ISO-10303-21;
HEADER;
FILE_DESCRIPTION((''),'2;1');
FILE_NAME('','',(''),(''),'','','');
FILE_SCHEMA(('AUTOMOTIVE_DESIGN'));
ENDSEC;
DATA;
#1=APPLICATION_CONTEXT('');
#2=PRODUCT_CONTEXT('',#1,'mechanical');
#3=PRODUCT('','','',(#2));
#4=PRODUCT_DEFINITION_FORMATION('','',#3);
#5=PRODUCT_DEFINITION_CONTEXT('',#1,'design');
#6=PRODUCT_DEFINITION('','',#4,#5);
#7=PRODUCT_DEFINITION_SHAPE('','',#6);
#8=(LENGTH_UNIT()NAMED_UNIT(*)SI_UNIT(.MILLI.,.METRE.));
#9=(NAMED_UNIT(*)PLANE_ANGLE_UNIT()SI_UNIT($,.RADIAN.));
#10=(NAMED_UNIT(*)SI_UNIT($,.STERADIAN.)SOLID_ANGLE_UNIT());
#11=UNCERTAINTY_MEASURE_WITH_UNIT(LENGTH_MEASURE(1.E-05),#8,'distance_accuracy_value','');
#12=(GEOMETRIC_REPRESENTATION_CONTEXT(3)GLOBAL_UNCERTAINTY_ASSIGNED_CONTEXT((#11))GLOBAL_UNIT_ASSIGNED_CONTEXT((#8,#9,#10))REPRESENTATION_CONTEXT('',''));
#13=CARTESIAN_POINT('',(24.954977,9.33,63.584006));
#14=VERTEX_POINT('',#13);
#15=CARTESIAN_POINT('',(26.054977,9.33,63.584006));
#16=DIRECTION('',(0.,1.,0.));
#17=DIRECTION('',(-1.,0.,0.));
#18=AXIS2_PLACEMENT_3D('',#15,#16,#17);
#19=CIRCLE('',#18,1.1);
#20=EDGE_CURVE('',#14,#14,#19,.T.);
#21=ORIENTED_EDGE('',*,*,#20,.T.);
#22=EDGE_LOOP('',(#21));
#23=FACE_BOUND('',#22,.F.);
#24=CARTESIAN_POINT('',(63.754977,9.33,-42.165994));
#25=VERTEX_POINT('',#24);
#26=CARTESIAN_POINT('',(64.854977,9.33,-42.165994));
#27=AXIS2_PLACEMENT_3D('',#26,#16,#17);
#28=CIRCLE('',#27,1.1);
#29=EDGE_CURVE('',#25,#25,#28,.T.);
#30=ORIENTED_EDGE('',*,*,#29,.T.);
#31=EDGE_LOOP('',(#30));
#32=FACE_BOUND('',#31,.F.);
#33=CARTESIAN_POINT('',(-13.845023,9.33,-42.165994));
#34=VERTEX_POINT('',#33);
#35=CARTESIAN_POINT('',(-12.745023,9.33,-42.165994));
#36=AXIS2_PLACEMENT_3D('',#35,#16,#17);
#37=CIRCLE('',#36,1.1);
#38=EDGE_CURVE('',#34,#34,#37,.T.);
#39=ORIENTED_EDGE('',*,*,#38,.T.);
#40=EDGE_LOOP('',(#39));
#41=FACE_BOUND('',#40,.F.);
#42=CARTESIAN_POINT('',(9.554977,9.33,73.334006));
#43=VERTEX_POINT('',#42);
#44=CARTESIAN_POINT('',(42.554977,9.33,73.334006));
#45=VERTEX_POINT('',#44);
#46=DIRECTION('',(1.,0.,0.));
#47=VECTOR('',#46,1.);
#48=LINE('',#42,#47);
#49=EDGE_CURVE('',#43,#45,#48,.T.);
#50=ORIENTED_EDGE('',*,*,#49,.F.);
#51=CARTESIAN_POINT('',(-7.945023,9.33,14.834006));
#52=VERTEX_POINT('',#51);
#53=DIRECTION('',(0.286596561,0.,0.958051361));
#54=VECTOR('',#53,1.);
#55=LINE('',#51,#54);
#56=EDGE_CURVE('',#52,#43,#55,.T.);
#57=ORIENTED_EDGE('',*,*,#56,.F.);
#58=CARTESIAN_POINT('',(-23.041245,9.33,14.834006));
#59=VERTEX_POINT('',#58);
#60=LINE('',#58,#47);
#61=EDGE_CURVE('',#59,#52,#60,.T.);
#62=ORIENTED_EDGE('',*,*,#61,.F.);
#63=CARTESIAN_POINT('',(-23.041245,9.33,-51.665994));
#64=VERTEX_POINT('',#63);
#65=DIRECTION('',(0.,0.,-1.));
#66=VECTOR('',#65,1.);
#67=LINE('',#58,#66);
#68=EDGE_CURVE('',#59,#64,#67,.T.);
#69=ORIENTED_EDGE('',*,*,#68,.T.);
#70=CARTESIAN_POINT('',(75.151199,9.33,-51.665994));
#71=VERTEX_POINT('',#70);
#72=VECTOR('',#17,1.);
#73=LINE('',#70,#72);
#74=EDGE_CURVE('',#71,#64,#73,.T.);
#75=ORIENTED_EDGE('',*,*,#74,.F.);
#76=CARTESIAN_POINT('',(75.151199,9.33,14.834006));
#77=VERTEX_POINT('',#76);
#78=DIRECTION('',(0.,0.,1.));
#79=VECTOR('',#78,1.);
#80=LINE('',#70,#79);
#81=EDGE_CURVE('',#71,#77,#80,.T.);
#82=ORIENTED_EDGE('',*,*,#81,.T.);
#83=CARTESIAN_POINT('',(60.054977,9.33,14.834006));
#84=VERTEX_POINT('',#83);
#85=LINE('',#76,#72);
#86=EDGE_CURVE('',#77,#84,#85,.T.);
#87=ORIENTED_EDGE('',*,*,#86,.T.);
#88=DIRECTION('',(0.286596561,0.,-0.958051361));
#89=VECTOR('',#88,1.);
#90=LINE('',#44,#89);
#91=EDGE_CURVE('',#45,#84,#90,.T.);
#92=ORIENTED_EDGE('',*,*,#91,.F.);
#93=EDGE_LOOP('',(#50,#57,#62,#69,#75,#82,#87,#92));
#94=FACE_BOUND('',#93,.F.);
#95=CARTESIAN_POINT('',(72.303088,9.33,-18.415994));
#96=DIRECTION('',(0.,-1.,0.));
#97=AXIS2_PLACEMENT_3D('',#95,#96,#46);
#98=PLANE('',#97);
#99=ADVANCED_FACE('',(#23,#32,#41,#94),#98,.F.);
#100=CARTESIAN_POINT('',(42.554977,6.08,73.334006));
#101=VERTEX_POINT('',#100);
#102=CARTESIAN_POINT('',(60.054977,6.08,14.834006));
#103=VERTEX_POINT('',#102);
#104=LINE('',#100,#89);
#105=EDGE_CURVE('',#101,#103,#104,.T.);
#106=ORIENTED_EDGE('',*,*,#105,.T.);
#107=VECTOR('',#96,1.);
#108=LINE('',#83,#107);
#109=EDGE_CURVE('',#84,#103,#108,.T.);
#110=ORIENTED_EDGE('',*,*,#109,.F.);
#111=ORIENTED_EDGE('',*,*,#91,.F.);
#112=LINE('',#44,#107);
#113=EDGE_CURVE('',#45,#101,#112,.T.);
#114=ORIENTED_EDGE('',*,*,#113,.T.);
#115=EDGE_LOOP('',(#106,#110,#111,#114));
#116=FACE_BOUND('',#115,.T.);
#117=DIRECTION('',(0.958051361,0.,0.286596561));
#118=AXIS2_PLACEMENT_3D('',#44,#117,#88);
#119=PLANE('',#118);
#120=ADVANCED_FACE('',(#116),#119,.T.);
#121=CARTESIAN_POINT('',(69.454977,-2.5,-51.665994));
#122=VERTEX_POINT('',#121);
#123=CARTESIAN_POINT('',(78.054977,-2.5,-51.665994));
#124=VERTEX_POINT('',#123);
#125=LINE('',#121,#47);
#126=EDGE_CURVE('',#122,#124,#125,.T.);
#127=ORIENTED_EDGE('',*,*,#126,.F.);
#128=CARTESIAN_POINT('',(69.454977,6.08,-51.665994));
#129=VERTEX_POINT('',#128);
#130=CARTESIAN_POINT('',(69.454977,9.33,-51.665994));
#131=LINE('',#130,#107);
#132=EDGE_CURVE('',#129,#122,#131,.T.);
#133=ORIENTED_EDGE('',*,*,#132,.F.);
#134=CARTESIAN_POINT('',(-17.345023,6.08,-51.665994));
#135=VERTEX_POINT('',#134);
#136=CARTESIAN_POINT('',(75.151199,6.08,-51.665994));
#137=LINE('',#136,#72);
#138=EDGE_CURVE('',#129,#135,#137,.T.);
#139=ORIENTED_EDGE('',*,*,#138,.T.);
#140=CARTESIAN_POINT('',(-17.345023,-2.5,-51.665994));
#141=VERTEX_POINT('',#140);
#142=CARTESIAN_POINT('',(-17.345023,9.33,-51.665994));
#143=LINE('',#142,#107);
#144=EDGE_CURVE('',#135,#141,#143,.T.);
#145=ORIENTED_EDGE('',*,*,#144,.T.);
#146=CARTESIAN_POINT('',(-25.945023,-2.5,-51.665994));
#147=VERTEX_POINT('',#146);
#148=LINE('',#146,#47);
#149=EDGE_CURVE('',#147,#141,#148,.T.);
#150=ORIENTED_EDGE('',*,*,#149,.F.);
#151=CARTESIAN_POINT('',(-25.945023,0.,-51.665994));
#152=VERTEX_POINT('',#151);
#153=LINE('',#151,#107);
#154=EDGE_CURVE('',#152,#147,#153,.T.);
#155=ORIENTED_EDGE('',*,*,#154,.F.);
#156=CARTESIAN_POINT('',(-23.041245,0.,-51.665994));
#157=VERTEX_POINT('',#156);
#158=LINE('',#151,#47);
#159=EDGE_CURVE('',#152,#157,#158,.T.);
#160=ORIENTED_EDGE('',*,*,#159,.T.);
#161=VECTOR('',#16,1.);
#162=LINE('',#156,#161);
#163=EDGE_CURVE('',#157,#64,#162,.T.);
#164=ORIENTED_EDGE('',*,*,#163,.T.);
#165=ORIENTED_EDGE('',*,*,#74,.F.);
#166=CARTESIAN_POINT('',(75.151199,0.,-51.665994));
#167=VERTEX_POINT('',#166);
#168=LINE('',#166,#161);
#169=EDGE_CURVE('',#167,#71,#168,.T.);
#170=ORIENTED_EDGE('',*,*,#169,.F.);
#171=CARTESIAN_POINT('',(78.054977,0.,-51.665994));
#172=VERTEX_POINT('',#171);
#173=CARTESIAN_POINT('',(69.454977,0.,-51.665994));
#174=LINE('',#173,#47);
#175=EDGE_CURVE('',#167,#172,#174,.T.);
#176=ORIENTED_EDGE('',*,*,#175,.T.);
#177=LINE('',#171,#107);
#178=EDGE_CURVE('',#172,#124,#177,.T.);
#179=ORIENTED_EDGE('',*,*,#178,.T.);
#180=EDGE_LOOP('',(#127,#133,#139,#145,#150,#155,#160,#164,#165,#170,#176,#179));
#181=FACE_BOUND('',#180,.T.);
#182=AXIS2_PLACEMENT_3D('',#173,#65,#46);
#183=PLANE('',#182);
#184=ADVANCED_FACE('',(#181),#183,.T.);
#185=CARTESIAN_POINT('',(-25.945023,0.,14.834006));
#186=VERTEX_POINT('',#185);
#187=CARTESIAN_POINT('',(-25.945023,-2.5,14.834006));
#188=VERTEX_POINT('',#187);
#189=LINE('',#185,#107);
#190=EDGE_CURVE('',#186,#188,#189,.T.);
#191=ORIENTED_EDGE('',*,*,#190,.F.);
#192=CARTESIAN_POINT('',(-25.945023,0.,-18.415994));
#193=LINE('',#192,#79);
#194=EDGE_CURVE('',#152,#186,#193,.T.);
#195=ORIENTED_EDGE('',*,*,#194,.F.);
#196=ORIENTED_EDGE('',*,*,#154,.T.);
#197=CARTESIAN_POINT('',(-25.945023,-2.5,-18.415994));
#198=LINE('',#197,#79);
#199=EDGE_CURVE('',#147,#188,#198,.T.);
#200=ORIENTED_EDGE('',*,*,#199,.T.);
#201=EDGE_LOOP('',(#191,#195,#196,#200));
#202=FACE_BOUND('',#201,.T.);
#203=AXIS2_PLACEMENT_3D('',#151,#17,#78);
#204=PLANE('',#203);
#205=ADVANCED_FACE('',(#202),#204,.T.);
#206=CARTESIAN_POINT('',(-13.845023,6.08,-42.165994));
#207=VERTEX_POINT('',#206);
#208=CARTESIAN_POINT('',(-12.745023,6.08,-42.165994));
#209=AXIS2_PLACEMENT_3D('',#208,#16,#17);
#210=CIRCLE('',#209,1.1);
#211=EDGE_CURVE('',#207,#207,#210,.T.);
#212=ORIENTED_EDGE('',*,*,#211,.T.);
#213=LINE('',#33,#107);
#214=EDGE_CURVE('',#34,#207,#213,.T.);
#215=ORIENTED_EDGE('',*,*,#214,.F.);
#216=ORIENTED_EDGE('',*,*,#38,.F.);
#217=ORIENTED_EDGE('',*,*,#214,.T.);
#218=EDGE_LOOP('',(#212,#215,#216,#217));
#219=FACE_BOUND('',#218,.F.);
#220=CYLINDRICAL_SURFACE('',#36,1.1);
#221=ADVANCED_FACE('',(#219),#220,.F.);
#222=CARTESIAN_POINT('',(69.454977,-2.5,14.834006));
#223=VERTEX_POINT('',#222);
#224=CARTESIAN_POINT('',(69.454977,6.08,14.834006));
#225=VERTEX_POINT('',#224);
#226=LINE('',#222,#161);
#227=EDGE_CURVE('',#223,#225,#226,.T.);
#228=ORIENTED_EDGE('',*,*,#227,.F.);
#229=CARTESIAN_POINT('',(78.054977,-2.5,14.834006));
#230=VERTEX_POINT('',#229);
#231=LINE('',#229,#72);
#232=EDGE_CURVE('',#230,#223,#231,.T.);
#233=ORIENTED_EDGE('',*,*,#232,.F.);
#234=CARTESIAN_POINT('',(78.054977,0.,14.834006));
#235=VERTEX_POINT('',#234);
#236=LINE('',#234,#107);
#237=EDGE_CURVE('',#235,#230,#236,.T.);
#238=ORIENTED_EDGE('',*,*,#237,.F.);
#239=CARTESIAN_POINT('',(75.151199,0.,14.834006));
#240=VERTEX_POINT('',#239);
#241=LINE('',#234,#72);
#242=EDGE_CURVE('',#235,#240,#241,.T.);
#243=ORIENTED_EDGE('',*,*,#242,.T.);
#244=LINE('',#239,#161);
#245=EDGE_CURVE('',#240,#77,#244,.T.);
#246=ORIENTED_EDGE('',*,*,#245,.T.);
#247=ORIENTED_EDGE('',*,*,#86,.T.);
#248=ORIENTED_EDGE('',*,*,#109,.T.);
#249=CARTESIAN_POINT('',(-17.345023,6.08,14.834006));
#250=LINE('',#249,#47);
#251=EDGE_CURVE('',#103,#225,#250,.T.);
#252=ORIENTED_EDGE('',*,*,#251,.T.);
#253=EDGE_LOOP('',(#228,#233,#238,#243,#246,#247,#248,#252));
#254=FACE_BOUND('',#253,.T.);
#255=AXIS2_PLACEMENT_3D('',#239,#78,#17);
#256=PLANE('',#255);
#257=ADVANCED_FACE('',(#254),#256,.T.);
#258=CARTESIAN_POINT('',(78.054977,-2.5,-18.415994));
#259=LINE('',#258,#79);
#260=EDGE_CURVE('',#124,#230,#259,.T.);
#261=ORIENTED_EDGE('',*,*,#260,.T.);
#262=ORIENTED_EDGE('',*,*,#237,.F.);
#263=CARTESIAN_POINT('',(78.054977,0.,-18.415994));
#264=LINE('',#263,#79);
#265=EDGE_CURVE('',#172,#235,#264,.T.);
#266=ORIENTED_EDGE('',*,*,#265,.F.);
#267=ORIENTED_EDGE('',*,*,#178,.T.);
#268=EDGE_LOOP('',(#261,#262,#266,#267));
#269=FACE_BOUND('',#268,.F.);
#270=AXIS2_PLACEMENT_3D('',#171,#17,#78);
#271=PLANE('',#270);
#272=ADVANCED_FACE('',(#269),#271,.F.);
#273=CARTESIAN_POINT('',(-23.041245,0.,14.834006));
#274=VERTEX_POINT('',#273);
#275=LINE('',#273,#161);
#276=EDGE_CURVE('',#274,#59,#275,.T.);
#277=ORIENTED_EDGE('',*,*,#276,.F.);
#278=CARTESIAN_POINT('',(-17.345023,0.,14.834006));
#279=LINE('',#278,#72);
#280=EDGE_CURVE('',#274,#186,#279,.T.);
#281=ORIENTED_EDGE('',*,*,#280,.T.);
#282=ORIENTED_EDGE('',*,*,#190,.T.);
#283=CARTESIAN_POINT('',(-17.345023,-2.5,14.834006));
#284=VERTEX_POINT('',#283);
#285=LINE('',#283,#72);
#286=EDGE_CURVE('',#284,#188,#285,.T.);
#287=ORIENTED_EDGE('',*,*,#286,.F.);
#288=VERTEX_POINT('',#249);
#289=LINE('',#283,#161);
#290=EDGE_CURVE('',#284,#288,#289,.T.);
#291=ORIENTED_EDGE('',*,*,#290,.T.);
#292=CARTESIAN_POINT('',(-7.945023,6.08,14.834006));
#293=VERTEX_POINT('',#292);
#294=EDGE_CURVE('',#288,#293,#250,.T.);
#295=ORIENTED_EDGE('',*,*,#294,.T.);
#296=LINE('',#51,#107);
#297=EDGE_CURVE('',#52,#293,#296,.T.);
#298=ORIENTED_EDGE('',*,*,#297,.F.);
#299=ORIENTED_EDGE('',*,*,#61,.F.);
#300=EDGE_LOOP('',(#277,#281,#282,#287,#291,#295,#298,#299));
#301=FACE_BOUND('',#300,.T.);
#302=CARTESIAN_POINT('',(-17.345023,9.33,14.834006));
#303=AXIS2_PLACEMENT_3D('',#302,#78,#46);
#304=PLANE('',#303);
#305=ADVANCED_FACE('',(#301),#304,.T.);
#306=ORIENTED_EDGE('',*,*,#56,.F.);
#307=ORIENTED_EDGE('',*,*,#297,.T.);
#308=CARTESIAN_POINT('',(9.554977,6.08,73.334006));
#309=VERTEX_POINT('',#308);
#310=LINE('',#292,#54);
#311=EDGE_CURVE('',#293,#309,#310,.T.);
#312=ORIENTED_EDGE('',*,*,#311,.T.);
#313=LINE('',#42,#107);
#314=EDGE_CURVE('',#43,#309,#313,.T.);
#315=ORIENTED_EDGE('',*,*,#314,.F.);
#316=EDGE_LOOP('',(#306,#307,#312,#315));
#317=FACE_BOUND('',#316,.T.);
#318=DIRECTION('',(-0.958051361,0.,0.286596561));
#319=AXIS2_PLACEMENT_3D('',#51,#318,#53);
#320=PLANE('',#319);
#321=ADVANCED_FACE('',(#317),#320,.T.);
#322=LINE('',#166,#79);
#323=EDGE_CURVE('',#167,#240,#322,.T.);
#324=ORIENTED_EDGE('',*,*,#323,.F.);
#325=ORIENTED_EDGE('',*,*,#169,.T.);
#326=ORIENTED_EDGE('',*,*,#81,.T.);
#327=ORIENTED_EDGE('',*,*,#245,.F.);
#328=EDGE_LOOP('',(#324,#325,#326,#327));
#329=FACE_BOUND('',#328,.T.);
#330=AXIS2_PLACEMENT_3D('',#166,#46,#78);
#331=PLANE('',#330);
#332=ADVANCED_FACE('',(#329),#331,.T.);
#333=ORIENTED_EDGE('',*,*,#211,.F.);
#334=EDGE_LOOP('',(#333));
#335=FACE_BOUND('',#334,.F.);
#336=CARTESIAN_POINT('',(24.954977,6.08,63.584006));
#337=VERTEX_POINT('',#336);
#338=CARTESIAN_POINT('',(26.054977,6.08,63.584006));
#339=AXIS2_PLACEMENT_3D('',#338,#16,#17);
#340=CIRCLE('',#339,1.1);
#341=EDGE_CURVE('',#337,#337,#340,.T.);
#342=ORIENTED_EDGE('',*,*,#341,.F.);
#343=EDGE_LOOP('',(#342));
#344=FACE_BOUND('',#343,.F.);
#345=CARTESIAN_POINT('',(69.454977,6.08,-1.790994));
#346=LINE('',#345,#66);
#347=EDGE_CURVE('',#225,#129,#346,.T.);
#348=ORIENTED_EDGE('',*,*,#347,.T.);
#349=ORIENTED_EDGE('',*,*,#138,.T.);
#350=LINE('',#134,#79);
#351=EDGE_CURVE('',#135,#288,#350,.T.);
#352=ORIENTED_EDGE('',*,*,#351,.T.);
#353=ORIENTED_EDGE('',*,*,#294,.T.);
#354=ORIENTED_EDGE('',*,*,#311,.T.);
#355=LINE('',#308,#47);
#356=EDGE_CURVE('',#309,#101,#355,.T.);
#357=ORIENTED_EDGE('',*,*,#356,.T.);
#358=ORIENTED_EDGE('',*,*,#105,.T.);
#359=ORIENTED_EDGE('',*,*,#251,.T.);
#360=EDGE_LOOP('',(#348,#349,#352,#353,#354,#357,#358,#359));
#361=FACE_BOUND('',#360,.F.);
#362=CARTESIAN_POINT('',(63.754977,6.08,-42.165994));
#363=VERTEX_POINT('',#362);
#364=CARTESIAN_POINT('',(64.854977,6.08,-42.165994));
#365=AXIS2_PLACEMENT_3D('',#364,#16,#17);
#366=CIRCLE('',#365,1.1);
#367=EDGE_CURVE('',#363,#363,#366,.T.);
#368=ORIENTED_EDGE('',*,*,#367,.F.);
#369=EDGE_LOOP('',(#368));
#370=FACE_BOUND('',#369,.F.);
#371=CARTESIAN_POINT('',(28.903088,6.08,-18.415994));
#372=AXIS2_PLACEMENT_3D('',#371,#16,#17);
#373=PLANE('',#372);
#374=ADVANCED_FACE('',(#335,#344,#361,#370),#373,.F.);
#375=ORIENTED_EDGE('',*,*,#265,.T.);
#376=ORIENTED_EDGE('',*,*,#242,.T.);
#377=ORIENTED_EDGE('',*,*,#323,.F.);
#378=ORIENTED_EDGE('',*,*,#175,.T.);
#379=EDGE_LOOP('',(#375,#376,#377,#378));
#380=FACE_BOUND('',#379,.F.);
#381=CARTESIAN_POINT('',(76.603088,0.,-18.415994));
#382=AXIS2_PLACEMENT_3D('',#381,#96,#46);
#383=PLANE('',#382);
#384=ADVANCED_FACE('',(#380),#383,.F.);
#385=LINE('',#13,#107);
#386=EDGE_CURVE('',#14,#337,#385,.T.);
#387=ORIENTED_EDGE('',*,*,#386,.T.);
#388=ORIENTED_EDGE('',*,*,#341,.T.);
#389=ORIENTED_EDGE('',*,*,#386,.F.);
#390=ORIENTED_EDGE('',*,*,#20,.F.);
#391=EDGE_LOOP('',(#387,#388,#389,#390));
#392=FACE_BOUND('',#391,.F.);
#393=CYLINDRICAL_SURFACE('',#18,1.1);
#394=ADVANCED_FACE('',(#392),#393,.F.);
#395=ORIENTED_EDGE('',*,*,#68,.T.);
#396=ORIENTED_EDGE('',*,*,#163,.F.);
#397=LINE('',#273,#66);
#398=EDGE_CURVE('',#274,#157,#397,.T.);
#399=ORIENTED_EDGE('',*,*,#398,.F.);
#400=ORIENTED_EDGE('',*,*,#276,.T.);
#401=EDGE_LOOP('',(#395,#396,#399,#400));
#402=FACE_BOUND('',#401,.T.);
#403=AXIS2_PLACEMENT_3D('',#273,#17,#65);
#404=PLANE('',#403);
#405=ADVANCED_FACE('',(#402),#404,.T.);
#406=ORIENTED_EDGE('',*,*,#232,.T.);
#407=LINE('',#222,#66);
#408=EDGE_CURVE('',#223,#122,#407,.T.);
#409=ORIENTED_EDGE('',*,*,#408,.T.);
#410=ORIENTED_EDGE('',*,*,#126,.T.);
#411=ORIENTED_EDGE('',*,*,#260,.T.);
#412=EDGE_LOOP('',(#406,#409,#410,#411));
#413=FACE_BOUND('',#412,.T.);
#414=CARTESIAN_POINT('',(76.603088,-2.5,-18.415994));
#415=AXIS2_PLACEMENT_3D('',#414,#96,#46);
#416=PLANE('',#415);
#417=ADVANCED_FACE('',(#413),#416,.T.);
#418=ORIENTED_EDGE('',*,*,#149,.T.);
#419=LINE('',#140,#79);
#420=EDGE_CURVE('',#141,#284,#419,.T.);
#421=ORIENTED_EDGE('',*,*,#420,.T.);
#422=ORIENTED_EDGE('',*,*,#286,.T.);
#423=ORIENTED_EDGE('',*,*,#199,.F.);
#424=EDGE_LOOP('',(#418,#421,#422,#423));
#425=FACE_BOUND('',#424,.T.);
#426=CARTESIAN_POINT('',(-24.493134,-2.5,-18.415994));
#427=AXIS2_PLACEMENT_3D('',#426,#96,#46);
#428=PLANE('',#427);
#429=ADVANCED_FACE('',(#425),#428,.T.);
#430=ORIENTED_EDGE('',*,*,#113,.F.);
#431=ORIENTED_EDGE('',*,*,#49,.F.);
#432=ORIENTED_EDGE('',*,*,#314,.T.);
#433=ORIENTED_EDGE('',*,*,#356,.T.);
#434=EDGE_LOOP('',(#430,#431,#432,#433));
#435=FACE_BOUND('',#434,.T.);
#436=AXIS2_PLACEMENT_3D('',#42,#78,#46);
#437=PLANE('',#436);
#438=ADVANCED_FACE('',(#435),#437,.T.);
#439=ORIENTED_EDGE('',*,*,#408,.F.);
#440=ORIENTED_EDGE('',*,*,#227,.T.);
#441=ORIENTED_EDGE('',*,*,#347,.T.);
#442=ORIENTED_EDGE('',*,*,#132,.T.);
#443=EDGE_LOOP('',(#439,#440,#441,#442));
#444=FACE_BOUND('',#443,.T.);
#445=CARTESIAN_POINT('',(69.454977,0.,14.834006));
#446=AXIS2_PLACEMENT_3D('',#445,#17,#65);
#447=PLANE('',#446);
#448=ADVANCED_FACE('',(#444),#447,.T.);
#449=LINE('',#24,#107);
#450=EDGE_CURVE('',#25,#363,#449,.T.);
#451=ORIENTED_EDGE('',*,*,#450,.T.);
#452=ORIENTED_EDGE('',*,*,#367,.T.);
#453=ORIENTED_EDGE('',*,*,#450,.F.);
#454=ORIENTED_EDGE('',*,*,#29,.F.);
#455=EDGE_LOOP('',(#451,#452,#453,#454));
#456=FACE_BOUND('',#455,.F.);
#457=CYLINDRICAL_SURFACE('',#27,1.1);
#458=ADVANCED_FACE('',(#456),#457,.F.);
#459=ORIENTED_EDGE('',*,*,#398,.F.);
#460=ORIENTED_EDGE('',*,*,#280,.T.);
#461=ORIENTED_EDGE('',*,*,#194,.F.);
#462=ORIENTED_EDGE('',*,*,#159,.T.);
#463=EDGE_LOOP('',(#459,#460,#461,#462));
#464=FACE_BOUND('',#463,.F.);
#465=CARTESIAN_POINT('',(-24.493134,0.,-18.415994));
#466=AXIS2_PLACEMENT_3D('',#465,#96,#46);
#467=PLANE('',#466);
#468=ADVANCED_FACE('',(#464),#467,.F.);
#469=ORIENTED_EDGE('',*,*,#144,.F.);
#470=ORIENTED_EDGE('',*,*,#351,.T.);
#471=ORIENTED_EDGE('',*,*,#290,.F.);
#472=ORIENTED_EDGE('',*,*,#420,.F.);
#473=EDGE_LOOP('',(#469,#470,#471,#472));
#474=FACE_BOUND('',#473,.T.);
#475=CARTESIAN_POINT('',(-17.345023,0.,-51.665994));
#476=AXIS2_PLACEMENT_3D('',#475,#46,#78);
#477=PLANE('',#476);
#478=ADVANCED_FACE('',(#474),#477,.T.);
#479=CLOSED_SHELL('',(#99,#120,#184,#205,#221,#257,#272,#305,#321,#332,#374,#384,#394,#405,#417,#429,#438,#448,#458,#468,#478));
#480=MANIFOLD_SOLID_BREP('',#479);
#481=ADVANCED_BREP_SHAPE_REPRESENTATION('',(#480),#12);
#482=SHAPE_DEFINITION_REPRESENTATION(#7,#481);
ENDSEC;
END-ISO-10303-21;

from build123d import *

# Parameters (mm, degrees)
F0_W     = 2.9037779868
F0_H     = 66.5
F1_DEPTH = 2.5
F2_DEPTH = 9.33
F3_R     = 1.1
F4_DEPTH = 3.25


# Not quite as in the source:
# - a feature names something its author has since deleted; it is built from what else it names


with BuildPart() as f1:
    # F0 (on Front) → F1 (new body)
    with BuildSketch(Plane.XZ):
        with Locations((-24.4931335896, -18.415993683)):
            Rectangle(F0_W, F0_H)
        Polygon((-20.845022583, 14.834006317), (-23.0412445962, 14.834006317), (-23.0412445962, -51.665993683), (-17.345022583, -51.665993683), (-17.345022583, 14.834006317), align=None)
    extrude(amount=F1_DEPTH)

    # F0 (on Front) → F2, piece 2 (join)
    with BuildSketch(Plane.XZ):
        Polygon((-20.845022583, 14.834006317), (-23.0412445962, 14.834006317), (-23.0412445962, -51.665993683), (-17.345022583, -51.665993683), (-17.345022583, 14.834006317), align=None)
    extrude(amount=-F2_DEPTH)



with BuildPart() as f1b:
    # F0 (on Front) → F1, piece 2 (new body)
    with BuildSketch(Plane.XZ):
        with Locations((76.6030884236, -18.415993683)):
            Rectangle(F0_W, F0_H)
        Polygon((72.954977417, 14.834006317), (69.454977417, 14.834006317), (69.454977417, -51.665993683), (75.1511994302, -51.665993683), (75.1511994302, 14.834006317), align=None)
    extrude(amount=F1_DEPTH)

    # F0 (on Front) → F2 (join)
    with BuildSketch(Plane.XZ):
        Polygon((72.954977417, 14.834006317), (69.454977417, 14.834006317), (69.454977417, -51.665993683), (75.1511994302, -51.665993683), (75.1511994302, 14.834006317), align=None)
    extrude(amount=-F2_DEPTH)


with BuildPart() as f1_1:
    add(f1.part)

    add(f1b.part)  # F4 merges F1b
    # F3 (on face) → F4 (join)
    with BuildSketch(Plane(origin=(0, 9.33, 0), x_dir=(-1, 0, 0), z_dir=(0, 1, 0))):
        Polygon((17.345022583, -51.665993683), (17.345022583, 14.834006317), (7.945022583, 14.834006317), (-26.054977417, 14.834006317), (-60.054977417, 14.834006317), (-75.1511994302, 14.834006317), (-75.1511994302, -51.665993683), align=None)
        with Locations((-64.854977417, -42.165993683)):
            Circle(F3_R, mode=Mode.SUBTRACT)
        with Locations((12.745022583, -42.165993683)):
            Circle(F3_R, mode=Mode.SUBTRACT)
        Polygon((-26.054977417, 14.834006317), (7.945022583, 14.834006317), (-9.554977417, 73.334006317), (-26.054977417, 73.334006317), (-42.554977417, 73.334006317), (-60.054977417, 14.834006317), align=None)
        with Locations((-26.054977417, 63.584006317)):
            Circle(F3_R, mode=Mode.SUBTRACT)
    extrude(amount=-F4_DEPTH)


solid = f1_1.part
